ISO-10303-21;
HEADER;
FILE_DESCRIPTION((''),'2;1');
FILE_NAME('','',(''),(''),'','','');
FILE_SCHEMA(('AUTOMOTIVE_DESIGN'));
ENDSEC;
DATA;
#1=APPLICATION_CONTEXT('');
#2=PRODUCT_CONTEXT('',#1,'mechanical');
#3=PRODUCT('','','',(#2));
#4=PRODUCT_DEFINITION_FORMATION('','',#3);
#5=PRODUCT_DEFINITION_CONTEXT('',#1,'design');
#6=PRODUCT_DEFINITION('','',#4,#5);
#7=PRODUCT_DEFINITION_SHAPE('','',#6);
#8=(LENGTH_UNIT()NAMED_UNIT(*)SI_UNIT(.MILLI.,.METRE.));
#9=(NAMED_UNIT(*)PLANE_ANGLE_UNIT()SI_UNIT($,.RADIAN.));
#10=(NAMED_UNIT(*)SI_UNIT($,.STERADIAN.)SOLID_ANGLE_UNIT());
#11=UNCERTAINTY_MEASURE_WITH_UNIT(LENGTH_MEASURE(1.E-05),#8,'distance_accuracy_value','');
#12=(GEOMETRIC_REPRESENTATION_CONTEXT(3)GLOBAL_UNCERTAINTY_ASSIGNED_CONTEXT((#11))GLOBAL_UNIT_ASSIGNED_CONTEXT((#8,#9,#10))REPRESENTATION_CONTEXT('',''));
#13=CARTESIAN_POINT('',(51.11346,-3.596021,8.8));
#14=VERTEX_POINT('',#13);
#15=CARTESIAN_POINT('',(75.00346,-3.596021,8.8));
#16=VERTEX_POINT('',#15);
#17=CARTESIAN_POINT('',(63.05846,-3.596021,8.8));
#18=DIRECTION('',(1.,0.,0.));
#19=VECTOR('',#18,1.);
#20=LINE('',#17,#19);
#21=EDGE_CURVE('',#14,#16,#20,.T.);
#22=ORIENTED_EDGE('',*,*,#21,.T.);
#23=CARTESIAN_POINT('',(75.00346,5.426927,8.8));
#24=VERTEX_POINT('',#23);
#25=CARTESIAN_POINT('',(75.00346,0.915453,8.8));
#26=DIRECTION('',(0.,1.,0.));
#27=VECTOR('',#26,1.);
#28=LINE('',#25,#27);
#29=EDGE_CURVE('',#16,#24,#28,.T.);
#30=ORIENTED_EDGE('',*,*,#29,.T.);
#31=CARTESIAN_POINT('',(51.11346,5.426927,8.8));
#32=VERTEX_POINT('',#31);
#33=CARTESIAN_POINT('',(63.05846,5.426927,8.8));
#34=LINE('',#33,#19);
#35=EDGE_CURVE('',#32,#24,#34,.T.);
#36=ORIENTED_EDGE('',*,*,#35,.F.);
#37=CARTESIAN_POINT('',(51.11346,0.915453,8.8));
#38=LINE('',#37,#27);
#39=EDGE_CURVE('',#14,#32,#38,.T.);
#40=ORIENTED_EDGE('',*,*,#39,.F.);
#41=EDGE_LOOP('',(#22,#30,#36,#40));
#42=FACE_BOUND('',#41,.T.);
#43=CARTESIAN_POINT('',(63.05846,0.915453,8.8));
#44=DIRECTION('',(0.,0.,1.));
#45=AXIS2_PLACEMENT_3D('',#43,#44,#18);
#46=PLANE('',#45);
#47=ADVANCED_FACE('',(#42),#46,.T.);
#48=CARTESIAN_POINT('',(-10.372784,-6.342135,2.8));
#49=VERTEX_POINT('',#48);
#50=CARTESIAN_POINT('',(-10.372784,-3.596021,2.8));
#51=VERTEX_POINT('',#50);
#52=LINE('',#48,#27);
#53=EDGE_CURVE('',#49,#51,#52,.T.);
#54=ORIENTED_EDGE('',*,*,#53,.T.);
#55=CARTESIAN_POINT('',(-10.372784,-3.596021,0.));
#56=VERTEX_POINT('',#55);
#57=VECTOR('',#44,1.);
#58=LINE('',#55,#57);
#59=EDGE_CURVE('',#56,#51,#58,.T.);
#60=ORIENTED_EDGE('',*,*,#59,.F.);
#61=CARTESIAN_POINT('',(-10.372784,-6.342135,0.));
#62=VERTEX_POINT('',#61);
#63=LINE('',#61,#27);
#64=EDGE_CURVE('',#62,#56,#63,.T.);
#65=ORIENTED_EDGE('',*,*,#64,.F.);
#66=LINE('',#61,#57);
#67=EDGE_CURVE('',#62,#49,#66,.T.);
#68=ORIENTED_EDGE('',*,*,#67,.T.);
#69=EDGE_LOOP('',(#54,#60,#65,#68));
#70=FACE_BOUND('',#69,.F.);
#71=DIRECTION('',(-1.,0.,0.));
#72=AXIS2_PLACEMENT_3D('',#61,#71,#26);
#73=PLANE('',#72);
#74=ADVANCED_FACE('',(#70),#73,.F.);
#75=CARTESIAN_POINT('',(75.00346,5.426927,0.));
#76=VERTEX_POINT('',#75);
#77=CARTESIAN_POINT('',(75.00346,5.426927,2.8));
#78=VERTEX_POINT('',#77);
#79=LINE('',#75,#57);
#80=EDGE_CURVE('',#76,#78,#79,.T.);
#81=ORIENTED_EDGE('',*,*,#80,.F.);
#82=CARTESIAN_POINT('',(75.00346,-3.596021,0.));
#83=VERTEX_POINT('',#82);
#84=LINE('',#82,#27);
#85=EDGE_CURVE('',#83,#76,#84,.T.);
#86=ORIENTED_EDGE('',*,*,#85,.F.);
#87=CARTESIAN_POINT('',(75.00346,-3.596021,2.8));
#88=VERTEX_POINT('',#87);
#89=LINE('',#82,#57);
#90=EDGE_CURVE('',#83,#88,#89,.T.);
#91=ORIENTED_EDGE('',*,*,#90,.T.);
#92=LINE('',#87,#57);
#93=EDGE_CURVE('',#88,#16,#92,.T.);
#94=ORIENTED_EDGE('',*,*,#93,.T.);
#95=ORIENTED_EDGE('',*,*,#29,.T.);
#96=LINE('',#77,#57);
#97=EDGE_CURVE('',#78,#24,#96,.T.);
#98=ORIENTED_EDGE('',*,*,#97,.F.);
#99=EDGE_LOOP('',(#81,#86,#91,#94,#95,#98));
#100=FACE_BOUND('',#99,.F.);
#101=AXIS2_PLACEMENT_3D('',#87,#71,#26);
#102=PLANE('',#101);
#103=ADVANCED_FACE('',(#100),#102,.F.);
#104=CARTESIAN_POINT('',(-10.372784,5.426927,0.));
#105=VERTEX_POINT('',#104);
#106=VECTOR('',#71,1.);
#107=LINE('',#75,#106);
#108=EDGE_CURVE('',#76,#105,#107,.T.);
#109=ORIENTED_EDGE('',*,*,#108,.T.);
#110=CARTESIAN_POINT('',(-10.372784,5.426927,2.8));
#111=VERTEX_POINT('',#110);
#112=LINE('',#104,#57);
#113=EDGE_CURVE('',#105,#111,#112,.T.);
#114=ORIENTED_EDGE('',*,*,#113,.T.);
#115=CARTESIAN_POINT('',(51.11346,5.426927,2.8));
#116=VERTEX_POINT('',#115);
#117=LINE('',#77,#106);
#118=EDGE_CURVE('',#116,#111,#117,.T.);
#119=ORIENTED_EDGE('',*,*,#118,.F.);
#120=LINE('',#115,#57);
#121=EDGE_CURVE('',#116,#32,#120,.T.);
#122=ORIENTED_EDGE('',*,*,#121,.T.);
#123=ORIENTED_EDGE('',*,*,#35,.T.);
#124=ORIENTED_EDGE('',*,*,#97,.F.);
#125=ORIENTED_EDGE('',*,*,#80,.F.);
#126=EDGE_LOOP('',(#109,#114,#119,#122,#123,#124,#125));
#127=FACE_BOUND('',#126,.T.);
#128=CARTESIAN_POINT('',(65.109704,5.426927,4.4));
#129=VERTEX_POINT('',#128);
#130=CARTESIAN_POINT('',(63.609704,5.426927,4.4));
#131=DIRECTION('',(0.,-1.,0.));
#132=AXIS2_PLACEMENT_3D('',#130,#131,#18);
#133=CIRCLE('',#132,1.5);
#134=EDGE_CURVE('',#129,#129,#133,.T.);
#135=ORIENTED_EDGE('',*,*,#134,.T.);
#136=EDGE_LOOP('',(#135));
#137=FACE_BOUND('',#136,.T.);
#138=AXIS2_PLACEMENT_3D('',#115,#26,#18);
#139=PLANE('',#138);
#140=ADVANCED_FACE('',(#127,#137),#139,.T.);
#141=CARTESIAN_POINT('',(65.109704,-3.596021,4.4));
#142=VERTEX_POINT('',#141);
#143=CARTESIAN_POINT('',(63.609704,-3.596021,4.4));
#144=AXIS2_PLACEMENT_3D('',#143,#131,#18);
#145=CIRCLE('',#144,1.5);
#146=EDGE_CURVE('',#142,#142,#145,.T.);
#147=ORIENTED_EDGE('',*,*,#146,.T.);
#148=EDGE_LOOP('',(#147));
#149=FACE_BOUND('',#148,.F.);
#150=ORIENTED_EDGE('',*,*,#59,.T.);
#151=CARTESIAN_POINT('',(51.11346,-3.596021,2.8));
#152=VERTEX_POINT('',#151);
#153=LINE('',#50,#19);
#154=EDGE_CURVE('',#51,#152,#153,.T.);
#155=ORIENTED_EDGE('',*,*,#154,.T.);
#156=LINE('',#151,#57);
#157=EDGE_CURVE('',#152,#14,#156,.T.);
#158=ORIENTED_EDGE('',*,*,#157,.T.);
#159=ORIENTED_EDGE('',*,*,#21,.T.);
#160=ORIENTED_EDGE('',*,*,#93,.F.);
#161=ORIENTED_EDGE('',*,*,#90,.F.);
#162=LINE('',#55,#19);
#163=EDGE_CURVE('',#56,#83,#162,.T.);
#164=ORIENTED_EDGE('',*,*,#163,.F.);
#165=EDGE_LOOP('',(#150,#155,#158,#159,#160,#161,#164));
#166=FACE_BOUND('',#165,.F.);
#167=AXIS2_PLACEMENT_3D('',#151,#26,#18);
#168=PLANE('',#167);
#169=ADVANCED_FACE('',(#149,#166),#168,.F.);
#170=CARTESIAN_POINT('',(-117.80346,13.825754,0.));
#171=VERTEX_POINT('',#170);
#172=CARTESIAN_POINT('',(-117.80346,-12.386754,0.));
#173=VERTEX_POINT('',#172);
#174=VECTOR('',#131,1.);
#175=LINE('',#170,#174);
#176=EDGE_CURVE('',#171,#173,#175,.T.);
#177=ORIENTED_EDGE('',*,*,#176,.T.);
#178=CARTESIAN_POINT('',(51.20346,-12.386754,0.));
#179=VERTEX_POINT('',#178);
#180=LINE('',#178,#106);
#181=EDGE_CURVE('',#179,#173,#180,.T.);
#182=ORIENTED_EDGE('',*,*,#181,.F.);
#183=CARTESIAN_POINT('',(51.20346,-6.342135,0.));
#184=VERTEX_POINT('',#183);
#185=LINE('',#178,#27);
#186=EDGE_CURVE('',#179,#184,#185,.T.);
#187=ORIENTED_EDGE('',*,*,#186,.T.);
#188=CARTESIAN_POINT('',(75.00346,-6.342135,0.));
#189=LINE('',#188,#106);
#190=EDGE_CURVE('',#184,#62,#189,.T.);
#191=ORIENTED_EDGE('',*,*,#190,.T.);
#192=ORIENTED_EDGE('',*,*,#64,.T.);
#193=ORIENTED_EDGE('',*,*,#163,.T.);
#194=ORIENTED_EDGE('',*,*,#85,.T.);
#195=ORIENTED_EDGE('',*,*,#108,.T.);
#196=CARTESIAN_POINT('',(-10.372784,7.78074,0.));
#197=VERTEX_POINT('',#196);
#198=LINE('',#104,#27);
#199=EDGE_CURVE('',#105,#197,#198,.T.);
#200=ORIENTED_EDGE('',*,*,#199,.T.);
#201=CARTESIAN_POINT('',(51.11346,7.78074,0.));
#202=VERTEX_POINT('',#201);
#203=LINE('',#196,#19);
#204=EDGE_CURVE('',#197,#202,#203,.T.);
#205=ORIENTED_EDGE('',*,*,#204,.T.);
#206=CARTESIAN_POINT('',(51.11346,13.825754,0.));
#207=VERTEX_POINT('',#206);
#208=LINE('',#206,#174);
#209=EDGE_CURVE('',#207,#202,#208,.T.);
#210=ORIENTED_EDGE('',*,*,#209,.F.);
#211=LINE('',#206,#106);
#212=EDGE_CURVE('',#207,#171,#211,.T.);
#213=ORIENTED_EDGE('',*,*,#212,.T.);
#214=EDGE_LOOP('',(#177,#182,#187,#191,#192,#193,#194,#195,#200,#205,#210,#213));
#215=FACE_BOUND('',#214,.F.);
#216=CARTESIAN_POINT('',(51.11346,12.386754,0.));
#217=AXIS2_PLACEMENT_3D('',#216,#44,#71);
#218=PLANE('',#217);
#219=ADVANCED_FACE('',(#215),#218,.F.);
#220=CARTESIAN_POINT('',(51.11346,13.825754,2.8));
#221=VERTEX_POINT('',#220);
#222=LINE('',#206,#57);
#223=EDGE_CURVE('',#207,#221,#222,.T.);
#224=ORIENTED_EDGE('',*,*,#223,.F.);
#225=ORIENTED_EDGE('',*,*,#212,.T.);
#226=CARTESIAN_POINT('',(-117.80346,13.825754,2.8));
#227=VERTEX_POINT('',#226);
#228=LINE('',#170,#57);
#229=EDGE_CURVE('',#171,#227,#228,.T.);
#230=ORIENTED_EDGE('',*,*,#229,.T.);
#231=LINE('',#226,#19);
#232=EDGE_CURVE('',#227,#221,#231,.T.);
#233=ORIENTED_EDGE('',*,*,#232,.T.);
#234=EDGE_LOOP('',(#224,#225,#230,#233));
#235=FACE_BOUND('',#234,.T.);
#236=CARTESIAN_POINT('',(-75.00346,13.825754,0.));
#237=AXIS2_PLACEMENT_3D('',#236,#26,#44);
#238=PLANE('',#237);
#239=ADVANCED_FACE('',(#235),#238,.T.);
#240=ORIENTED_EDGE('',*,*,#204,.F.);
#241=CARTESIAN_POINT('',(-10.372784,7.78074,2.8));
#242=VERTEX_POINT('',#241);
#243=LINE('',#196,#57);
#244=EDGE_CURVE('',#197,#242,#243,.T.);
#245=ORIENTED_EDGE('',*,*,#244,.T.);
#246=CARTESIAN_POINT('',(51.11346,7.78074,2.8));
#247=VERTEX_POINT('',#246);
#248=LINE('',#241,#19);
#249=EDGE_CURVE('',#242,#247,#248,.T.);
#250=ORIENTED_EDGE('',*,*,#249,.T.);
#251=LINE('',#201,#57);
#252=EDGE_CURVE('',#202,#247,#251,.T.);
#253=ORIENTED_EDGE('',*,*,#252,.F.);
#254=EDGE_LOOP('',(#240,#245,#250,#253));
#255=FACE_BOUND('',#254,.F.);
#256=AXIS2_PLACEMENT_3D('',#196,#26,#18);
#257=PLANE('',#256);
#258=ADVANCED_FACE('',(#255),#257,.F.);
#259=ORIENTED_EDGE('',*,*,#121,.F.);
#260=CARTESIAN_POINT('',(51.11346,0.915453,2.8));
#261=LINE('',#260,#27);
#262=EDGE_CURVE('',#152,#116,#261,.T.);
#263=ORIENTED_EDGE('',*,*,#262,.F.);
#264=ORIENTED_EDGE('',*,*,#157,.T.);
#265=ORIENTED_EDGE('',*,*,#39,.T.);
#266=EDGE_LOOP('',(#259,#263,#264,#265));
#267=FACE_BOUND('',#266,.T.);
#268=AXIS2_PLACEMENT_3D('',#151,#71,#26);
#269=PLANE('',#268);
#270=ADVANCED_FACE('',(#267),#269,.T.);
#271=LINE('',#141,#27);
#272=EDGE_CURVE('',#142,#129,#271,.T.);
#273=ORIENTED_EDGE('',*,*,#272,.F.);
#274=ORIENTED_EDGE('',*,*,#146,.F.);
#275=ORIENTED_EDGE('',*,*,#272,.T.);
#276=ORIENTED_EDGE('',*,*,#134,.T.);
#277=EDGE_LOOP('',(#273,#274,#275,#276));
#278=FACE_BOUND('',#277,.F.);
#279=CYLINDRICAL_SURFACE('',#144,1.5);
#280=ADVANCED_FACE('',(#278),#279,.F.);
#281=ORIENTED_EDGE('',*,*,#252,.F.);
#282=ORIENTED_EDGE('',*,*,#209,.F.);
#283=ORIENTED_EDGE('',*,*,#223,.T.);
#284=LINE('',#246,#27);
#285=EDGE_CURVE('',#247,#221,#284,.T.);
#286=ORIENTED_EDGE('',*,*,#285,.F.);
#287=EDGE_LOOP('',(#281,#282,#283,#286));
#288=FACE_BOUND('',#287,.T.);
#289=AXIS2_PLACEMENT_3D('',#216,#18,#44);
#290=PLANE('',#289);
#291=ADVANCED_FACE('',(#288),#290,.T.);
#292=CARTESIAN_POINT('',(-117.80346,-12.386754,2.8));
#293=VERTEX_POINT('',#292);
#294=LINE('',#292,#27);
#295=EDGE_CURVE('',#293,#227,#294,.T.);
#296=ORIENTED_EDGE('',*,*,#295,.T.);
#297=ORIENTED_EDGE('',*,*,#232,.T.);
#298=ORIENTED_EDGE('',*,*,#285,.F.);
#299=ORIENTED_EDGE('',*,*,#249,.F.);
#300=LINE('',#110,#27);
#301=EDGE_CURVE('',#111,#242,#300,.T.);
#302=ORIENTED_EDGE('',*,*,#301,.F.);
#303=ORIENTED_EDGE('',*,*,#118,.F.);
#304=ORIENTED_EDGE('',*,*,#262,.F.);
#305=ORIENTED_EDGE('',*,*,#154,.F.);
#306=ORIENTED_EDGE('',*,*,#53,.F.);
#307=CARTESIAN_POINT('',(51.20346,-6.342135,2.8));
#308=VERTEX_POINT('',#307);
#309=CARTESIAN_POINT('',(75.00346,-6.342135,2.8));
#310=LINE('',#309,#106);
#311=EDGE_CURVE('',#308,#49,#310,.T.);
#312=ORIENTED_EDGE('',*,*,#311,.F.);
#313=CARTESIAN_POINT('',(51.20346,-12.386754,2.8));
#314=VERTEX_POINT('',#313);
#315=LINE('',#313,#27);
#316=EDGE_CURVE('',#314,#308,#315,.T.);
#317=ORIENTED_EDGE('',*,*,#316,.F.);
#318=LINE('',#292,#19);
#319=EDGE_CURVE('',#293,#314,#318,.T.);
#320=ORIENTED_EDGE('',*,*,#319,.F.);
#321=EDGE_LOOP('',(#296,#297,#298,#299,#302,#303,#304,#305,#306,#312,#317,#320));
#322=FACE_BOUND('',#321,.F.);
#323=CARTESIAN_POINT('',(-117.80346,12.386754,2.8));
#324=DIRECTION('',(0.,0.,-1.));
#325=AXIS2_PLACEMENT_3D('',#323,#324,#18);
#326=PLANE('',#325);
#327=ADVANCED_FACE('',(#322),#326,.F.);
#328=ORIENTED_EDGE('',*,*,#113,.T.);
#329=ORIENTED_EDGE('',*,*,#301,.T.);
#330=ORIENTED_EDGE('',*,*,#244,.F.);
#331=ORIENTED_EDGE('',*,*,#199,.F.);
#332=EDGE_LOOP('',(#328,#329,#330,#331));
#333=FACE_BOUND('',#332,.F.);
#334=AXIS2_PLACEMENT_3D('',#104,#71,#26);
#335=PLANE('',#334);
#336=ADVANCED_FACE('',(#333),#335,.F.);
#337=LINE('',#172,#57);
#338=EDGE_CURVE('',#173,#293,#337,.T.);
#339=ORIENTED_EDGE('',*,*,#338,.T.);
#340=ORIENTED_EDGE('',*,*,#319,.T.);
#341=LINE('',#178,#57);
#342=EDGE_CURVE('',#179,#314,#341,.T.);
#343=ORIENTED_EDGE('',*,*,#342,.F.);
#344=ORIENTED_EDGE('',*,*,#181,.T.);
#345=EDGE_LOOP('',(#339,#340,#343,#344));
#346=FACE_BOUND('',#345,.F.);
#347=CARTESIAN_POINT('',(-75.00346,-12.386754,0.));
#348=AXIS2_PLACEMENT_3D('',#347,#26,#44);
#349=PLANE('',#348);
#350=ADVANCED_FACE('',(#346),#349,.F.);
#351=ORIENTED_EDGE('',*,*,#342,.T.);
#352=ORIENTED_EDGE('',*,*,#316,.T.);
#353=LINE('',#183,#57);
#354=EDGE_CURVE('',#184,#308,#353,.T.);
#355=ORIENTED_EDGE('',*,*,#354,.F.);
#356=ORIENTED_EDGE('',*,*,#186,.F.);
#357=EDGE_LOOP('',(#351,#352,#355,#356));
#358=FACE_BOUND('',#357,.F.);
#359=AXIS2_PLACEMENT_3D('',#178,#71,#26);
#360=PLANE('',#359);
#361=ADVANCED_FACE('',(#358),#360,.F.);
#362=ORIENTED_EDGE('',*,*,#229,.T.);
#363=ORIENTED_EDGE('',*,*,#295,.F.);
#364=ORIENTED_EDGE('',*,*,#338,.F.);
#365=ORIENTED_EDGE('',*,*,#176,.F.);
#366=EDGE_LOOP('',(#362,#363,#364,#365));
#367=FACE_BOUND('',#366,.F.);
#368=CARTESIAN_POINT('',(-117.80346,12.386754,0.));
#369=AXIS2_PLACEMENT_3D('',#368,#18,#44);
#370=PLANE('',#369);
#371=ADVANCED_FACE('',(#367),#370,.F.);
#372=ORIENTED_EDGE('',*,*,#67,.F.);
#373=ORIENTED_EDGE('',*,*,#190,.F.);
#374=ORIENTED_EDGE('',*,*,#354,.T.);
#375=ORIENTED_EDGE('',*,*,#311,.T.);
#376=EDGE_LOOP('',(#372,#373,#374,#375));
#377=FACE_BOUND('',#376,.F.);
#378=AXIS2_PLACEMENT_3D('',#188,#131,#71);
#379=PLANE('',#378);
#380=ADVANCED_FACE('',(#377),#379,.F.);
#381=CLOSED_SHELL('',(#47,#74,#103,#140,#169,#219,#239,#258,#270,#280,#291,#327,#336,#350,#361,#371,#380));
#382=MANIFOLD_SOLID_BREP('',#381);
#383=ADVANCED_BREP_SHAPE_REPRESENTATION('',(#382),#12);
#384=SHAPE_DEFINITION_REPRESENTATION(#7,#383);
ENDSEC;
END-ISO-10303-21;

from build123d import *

# Parameters (mm, degrees)
F1_DEPTH = 2.8
F2_DEPTH = 23.8
F3_DEPTH = 23.89
F4_DEPTH = 42.8
F5_W     = 23.89
F5_H     = 9.0229478665
F6_DEPTH = 6
F7_R     = 1.5
F8_DEPTH = 9.0229478665
F9_DEPTH = 1.439


with BuildPart() as f1:
    # F0 (on Top) → F1 (new body)
    with BuildSketch(Plane.XY):
        Polygon((-75.0034600496, -12.3867541552), (75.0034600496, -12.3867541552), (75.0034600496, -6.3421353698), (-10.3727839887, -6.3421353698), (-10.3727839887, -3.5960208625), (75.0034600496, -3.5960208625), (75.0034600496, 5.426927004), (-10.3727839887, 5.426927004), (-10.3727839887, 7.7807395719), (75.0034600496, 7.7807395719), (75.0034600496, 12.3867541552), (-75.0034600496, 12.3867541552), align=None)
    extrude(amount=F1_DEPTH)

    # F2 (cut): a face of the model
    f2_faces = [f1.faces().sort_by_distance(p)[0] for p in [
        (75.0034600496, -9.3644447625, 1.4),
    ]]
    extrude(f2_faces, amount=-F2_DEPTH, mode=Mode.SUBTRACT)

    # F3 (cut): a face of the model
    f3_faces = [f1.faces().sort_by_distance(p)[0] for p in [
        (75.0034600496, 10.0837468635, 1.4),
    ]]
    extrude(f3_faces, amount=-F3_DEPTH, mode=Mode.SUBTRACT)

    # F4 (add): a face of the model
    f4_faces = [f1.faces().sort_by_distance(p)[0] for p in [
        (-75.0034600496, 0, 1.4),
    ]]
    extrude(f4_faces, amount=F4_DEPTH)

    # F5 (on face) → F6 (join)
    with BuildSketch(Plane.XY.offset(2.8)):
        with Locations((63.0584600496, 0.9154530708)):
            Rectangle(F5_W, F5_H)
    extrude(amount=F6_DEPTH)

    # F7 (on face) → F8 (cut, through all)
    with BuildSketch(Plane.XZ.offset(3.5960208625)):
        with Locations((63.6097043753, 4.4)):
            Circle(F7_R)
    extrude(amount=-F8_DEPTH, mode=Mode.SUBTRACT)

    # F9 (add): a face of the model
    f9_faces = [f1.faces().sort_by_distance(p)[0] for p in [
        (-33.345, 12.3867541552, 1.4),
    ]]
    extrude(f9_faces, amount=F9_DEPTH)


solid = f1.part
